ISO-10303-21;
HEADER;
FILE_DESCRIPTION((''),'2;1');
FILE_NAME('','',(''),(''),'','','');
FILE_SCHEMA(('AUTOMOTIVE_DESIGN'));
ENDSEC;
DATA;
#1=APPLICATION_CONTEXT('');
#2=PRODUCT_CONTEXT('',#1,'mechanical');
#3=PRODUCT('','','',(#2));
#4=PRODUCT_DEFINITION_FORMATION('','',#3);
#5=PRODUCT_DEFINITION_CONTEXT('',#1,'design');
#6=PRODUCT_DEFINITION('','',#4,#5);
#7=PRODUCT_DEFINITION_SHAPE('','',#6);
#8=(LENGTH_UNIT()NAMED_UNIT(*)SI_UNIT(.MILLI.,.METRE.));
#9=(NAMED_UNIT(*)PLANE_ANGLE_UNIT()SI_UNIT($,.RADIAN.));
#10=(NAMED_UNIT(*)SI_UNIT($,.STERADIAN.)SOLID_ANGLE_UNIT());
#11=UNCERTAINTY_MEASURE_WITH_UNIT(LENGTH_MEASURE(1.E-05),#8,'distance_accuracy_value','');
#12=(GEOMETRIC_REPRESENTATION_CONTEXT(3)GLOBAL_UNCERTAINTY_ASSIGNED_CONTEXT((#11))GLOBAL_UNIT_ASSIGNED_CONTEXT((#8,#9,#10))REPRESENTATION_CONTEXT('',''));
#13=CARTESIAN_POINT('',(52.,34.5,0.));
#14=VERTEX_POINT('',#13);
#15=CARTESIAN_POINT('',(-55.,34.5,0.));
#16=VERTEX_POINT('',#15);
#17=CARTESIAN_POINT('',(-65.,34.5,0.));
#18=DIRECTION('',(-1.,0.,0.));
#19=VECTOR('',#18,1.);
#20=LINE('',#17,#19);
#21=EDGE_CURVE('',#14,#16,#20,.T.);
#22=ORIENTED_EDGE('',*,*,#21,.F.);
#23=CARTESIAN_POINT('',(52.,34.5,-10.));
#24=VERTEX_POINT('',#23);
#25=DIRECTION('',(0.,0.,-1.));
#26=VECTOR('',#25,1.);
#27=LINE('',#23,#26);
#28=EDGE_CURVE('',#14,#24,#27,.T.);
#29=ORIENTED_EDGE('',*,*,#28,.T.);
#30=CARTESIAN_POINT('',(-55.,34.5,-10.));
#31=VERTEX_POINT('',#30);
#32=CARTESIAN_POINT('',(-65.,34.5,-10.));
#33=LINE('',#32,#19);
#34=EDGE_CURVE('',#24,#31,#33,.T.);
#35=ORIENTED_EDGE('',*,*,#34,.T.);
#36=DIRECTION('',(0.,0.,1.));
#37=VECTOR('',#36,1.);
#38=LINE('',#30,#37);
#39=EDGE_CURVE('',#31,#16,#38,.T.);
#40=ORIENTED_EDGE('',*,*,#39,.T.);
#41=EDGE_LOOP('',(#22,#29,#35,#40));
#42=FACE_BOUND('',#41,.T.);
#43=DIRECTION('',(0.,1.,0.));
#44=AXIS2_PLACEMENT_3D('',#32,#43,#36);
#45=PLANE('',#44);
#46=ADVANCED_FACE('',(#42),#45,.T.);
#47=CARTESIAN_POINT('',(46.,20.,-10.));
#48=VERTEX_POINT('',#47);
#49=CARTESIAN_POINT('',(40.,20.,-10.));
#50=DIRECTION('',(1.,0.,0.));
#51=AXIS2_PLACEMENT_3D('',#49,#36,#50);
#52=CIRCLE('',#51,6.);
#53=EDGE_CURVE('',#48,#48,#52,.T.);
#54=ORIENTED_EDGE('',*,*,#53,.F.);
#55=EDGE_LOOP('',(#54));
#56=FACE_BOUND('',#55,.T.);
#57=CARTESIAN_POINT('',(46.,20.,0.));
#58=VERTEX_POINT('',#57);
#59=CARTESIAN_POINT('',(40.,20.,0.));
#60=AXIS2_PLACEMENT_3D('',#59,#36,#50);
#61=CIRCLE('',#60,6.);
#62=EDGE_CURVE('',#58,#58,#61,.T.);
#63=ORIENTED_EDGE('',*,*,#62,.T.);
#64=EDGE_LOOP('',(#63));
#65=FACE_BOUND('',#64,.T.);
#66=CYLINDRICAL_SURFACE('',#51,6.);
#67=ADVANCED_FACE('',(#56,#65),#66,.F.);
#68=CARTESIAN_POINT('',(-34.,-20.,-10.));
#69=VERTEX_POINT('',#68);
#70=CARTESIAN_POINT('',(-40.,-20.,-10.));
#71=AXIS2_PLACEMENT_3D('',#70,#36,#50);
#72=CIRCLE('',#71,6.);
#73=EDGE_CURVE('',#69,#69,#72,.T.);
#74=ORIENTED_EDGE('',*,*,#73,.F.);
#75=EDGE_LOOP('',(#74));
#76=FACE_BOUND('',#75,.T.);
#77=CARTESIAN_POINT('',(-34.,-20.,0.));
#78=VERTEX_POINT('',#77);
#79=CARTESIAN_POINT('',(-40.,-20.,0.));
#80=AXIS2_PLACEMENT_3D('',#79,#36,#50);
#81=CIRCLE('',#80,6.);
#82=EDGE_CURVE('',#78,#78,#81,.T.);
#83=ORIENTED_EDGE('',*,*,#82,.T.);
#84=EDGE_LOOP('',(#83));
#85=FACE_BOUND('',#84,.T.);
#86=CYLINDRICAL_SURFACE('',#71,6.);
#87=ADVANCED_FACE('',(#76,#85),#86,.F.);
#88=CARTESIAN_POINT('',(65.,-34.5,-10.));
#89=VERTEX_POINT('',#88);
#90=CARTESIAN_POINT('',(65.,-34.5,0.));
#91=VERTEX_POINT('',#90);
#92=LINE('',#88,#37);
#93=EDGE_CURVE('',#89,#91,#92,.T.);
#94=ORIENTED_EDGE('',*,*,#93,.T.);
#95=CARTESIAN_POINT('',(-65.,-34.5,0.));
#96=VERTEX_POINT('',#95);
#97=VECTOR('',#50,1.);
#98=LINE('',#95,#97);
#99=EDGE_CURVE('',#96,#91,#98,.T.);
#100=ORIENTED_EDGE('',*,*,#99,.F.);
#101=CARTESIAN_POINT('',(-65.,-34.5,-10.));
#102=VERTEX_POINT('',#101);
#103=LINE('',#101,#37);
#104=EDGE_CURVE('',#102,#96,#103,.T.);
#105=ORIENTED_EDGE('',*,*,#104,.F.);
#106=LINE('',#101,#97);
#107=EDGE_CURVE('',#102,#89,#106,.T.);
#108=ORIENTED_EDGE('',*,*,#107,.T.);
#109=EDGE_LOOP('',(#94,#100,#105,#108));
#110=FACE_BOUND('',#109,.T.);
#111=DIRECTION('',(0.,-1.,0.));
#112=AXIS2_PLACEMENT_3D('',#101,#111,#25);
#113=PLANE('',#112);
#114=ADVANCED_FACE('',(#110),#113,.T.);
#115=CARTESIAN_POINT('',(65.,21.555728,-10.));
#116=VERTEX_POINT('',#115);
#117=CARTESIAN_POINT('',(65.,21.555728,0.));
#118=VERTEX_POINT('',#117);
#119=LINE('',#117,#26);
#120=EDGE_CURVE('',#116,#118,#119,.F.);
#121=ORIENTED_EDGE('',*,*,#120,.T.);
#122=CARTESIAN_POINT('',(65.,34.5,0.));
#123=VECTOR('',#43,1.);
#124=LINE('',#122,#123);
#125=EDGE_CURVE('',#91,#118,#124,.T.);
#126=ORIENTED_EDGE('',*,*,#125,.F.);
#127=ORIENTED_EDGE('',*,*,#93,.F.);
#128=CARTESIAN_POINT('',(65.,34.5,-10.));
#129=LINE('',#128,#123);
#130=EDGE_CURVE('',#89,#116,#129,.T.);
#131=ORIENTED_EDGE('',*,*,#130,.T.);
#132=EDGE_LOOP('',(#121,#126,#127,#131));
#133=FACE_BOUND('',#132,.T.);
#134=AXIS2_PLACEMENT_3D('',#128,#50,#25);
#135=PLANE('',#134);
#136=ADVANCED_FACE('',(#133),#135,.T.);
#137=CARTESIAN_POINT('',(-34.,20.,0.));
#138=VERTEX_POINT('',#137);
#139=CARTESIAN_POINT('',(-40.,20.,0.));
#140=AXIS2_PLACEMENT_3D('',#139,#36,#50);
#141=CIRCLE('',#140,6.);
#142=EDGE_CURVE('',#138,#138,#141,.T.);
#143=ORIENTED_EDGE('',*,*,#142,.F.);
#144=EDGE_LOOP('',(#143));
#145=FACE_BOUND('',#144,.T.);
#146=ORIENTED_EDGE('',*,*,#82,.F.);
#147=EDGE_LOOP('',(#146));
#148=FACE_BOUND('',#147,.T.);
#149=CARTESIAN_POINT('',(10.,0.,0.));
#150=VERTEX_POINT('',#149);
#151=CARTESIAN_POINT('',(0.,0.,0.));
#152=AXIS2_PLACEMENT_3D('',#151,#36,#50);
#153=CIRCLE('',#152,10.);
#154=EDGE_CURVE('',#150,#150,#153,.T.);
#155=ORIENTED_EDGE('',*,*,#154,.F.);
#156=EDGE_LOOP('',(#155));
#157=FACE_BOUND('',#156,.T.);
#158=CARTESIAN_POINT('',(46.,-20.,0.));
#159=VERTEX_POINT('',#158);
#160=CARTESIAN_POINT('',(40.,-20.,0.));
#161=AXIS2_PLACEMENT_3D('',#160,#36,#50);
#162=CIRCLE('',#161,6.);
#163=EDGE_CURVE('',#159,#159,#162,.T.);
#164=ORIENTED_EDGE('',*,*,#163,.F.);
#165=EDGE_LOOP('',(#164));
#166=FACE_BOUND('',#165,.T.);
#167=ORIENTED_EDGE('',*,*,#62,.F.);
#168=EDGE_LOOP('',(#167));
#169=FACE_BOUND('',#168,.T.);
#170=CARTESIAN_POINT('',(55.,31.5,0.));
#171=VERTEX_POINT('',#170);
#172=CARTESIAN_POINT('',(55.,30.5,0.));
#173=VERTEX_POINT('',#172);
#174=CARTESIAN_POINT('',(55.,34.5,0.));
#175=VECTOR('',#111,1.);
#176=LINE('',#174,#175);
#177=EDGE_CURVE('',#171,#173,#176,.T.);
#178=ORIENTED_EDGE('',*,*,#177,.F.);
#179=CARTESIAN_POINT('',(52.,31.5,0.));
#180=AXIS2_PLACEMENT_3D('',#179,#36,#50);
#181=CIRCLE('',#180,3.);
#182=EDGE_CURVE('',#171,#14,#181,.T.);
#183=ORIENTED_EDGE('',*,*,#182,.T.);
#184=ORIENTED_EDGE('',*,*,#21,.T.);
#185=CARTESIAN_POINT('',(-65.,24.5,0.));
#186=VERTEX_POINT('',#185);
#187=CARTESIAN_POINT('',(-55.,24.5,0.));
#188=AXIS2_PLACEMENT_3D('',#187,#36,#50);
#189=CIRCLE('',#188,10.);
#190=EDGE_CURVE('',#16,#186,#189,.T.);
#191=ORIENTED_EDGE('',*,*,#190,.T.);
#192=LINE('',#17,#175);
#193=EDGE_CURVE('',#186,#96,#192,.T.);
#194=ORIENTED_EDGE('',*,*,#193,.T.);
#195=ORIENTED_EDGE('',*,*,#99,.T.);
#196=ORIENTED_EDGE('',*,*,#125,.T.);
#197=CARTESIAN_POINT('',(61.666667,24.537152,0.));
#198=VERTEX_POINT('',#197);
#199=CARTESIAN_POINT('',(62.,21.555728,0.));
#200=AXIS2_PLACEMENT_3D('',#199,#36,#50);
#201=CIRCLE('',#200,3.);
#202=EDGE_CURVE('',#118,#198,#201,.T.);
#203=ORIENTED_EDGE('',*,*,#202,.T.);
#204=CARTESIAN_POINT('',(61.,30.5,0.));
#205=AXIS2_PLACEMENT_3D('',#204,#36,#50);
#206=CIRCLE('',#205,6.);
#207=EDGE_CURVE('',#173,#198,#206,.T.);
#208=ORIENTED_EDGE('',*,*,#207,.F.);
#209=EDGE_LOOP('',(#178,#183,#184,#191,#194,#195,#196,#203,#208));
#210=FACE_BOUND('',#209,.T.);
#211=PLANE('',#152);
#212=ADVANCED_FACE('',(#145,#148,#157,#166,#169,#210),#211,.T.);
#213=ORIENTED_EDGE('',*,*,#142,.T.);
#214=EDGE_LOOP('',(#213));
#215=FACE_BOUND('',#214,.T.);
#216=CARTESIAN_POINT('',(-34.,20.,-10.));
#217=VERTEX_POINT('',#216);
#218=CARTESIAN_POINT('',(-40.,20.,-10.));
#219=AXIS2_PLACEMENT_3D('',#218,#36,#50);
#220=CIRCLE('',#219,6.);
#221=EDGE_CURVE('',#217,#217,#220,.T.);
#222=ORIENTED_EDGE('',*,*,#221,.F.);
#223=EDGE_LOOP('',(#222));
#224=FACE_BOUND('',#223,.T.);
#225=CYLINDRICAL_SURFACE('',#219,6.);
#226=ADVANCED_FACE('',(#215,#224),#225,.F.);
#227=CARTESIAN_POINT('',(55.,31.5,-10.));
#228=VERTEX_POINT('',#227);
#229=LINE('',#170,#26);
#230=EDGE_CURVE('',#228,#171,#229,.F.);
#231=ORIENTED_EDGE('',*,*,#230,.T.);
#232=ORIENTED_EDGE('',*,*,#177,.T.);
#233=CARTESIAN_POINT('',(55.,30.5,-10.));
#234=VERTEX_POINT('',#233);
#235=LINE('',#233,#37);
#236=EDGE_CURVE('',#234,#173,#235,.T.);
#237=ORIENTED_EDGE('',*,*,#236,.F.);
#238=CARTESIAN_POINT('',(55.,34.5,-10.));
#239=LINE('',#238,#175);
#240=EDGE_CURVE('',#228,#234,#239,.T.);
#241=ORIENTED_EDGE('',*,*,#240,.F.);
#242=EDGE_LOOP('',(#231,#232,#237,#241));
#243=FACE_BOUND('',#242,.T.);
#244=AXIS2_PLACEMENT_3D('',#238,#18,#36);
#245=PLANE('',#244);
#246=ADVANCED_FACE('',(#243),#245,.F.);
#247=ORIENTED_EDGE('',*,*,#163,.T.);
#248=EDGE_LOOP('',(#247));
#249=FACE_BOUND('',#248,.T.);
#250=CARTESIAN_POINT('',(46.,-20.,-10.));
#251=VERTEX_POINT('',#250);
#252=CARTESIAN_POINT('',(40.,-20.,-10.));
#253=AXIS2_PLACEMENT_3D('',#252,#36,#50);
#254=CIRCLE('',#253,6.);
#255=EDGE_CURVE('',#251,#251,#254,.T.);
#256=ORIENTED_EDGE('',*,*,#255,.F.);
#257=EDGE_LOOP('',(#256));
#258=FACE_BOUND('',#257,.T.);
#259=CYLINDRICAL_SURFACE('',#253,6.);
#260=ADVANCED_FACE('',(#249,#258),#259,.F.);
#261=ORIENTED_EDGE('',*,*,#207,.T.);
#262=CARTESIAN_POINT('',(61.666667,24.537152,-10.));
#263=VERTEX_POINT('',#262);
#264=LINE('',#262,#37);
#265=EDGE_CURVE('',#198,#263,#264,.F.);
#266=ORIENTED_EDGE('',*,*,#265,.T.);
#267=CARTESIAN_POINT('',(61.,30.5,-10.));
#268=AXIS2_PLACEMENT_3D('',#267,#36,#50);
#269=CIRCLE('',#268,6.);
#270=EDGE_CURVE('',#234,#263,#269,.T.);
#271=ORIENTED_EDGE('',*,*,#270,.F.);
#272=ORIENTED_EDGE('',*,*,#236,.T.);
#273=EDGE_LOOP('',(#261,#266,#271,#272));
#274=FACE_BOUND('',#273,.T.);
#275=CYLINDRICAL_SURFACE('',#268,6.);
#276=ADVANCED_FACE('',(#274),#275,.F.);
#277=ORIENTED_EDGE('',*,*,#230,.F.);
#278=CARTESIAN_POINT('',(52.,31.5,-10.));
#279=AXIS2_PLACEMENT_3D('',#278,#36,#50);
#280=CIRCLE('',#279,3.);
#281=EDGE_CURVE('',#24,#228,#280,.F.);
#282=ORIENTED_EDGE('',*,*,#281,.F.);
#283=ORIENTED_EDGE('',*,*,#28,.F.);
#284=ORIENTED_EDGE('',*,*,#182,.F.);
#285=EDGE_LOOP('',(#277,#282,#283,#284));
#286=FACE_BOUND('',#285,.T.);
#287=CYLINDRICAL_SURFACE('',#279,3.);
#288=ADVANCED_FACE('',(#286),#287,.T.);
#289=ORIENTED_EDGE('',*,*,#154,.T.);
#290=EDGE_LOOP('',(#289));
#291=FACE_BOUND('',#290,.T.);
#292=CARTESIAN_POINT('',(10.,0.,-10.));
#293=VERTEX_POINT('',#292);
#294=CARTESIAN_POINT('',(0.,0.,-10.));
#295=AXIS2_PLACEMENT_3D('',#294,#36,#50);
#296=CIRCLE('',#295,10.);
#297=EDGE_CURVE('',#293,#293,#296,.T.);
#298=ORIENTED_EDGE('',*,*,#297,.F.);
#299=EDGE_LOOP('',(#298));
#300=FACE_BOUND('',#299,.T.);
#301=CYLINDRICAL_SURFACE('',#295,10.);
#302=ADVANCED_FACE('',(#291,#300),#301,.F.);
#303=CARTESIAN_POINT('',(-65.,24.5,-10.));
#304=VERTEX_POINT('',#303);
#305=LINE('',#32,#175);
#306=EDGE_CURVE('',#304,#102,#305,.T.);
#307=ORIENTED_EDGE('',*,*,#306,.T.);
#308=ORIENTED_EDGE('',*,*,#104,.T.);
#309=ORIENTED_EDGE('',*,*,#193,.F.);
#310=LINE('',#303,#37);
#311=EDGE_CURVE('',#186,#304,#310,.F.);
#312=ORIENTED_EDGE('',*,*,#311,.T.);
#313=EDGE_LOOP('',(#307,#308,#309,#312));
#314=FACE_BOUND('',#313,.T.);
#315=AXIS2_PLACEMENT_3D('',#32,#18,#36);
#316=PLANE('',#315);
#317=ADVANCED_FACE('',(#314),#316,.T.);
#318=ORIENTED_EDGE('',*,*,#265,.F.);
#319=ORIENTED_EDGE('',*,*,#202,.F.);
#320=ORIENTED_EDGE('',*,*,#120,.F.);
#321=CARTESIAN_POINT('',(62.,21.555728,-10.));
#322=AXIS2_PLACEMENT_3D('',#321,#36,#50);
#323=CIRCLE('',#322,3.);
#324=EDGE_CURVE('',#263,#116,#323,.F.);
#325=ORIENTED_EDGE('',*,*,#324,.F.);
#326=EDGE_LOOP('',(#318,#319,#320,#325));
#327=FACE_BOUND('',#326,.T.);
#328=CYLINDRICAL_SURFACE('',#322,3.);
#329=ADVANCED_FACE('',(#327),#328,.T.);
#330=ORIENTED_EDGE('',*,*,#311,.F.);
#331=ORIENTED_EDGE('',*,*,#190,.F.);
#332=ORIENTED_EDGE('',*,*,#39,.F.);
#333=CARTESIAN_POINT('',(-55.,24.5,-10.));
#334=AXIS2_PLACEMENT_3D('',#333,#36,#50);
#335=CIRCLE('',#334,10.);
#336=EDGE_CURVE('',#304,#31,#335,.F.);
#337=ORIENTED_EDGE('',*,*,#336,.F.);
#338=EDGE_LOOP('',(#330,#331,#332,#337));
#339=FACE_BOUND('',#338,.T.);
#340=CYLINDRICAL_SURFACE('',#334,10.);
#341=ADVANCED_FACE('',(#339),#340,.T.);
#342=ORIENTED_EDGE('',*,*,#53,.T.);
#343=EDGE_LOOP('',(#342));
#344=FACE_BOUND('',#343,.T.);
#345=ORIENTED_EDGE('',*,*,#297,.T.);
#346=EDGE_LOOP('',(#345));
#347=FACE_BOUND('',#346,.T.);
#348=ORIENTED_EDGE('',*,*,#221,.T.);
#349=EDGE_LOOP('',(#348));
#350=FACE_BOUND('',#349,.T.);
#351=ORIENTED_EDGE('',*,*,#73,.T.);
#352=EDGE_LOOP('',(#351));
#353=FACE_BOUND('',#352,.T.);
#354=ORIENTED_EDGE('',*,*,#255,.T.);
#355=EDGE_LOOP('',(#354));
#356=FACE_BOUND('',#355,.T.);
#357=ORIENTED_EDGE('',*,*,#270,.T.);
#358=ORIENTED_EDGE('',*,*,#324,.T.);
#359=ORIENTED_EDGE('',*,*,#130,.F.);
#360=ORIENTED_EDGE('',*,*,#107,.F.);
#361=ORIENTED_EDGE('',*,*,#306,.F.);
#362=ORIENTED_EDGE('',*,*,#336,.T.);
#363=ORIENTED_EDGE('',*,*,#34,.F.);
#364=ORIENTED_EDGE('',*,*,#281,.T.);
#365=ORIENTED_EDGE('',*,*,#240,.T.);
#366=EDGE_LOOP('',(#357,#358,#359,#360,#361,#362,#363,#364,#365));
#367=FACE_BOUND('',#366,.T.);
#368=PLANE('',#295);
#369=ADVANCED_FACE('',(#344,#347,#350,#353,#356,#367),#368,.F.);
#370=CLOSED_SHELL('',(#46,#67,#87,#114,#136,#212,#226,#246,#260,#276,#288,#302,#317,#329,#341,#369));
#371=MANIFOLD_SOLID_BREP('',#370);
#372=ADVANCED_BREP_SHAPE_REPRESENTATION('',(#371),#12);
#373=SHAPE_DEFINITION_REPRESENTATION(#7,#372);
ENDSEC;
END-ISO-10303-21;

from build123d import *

# Parameters (mm, degrees)
SKETCH1_W          = 130
SKETCH1_H          = 69
BASE_FLANGE1_DEPTH = 10
SKETCH6_R          = 10
SKETCH6_R_2        = 6
CUT_EXTRUDE1_DEPTH = 75.264729179
FILLET1_R          = 10
CUT_EXTRUDE2_DEPTH = 75.264729179
FILLET2_R          = 3


# Sheet-metal steps are written as plain solids
with BuildPart() as part:
    # Sketch1 → Base-Flange1 (new body)
    with BuildSketch(Plane.XY):
        Rectangle(SKETCH1_W, SKETCH1_H)
    extrude(amount=-BASE_FLANGE1_DEPTH)

    # Sketch6 → Cut-Extrude1 (cut, through all)
    with BuildSketch(Plane.XY):
        Circle(SKETCH6_R)
        with Locations((-40, 20)):
            Circle(SKETCH6_R_2)
        with Locations((-40, -20)):
            Circle(SKETCH6_R_2)
        with Locations((40, -20)):
            Circle(SKETCH6_R_2)
        with Locations((40, 20)):
            Circle(SKETCH6_R_2)
    extrude(amount=-CUT_EXTRUDE1_DEPTH, mode=Mode.SUBTRACT)

    # Fillet1
    fillet1_edges = [part.edges().sort_by_distance(p)[0] for p in [
        (-65, 34.5, -5),
        (65, 34.5, -5),
    ]]
    fillet(fillet1_edges, radius=FILLET1_R)

    # Sketch7 → Cut-Extrude2 (cut, through all)
    with BuildSketch(Plane.XY):
        with BuildLine():
            Line((67, 34.5), (67, 30.5))
            ThreePointArc((67, 30.5), (61, 24.5), (55, 30.5))
            Line((55, 30.5), (55, 34.5))
            ThreePointArc((55, 34.5), (61, 40.5), (67, 34.5))
        make_face()
    extrude(amount=-CUT_EXTRUDE2_DEPTH, mode=Mode.SUBTRACT)

    # Fillet2
    fillet2_edges = [part.edges().sort_by_distance(p)[0] for p in [
        (55, 34.5, -5),
        (64.896192513, 25.93714082, -5),
    ]]
    fillet(fillet2_edges, radius=FILLET2_R)


solid = part.part
